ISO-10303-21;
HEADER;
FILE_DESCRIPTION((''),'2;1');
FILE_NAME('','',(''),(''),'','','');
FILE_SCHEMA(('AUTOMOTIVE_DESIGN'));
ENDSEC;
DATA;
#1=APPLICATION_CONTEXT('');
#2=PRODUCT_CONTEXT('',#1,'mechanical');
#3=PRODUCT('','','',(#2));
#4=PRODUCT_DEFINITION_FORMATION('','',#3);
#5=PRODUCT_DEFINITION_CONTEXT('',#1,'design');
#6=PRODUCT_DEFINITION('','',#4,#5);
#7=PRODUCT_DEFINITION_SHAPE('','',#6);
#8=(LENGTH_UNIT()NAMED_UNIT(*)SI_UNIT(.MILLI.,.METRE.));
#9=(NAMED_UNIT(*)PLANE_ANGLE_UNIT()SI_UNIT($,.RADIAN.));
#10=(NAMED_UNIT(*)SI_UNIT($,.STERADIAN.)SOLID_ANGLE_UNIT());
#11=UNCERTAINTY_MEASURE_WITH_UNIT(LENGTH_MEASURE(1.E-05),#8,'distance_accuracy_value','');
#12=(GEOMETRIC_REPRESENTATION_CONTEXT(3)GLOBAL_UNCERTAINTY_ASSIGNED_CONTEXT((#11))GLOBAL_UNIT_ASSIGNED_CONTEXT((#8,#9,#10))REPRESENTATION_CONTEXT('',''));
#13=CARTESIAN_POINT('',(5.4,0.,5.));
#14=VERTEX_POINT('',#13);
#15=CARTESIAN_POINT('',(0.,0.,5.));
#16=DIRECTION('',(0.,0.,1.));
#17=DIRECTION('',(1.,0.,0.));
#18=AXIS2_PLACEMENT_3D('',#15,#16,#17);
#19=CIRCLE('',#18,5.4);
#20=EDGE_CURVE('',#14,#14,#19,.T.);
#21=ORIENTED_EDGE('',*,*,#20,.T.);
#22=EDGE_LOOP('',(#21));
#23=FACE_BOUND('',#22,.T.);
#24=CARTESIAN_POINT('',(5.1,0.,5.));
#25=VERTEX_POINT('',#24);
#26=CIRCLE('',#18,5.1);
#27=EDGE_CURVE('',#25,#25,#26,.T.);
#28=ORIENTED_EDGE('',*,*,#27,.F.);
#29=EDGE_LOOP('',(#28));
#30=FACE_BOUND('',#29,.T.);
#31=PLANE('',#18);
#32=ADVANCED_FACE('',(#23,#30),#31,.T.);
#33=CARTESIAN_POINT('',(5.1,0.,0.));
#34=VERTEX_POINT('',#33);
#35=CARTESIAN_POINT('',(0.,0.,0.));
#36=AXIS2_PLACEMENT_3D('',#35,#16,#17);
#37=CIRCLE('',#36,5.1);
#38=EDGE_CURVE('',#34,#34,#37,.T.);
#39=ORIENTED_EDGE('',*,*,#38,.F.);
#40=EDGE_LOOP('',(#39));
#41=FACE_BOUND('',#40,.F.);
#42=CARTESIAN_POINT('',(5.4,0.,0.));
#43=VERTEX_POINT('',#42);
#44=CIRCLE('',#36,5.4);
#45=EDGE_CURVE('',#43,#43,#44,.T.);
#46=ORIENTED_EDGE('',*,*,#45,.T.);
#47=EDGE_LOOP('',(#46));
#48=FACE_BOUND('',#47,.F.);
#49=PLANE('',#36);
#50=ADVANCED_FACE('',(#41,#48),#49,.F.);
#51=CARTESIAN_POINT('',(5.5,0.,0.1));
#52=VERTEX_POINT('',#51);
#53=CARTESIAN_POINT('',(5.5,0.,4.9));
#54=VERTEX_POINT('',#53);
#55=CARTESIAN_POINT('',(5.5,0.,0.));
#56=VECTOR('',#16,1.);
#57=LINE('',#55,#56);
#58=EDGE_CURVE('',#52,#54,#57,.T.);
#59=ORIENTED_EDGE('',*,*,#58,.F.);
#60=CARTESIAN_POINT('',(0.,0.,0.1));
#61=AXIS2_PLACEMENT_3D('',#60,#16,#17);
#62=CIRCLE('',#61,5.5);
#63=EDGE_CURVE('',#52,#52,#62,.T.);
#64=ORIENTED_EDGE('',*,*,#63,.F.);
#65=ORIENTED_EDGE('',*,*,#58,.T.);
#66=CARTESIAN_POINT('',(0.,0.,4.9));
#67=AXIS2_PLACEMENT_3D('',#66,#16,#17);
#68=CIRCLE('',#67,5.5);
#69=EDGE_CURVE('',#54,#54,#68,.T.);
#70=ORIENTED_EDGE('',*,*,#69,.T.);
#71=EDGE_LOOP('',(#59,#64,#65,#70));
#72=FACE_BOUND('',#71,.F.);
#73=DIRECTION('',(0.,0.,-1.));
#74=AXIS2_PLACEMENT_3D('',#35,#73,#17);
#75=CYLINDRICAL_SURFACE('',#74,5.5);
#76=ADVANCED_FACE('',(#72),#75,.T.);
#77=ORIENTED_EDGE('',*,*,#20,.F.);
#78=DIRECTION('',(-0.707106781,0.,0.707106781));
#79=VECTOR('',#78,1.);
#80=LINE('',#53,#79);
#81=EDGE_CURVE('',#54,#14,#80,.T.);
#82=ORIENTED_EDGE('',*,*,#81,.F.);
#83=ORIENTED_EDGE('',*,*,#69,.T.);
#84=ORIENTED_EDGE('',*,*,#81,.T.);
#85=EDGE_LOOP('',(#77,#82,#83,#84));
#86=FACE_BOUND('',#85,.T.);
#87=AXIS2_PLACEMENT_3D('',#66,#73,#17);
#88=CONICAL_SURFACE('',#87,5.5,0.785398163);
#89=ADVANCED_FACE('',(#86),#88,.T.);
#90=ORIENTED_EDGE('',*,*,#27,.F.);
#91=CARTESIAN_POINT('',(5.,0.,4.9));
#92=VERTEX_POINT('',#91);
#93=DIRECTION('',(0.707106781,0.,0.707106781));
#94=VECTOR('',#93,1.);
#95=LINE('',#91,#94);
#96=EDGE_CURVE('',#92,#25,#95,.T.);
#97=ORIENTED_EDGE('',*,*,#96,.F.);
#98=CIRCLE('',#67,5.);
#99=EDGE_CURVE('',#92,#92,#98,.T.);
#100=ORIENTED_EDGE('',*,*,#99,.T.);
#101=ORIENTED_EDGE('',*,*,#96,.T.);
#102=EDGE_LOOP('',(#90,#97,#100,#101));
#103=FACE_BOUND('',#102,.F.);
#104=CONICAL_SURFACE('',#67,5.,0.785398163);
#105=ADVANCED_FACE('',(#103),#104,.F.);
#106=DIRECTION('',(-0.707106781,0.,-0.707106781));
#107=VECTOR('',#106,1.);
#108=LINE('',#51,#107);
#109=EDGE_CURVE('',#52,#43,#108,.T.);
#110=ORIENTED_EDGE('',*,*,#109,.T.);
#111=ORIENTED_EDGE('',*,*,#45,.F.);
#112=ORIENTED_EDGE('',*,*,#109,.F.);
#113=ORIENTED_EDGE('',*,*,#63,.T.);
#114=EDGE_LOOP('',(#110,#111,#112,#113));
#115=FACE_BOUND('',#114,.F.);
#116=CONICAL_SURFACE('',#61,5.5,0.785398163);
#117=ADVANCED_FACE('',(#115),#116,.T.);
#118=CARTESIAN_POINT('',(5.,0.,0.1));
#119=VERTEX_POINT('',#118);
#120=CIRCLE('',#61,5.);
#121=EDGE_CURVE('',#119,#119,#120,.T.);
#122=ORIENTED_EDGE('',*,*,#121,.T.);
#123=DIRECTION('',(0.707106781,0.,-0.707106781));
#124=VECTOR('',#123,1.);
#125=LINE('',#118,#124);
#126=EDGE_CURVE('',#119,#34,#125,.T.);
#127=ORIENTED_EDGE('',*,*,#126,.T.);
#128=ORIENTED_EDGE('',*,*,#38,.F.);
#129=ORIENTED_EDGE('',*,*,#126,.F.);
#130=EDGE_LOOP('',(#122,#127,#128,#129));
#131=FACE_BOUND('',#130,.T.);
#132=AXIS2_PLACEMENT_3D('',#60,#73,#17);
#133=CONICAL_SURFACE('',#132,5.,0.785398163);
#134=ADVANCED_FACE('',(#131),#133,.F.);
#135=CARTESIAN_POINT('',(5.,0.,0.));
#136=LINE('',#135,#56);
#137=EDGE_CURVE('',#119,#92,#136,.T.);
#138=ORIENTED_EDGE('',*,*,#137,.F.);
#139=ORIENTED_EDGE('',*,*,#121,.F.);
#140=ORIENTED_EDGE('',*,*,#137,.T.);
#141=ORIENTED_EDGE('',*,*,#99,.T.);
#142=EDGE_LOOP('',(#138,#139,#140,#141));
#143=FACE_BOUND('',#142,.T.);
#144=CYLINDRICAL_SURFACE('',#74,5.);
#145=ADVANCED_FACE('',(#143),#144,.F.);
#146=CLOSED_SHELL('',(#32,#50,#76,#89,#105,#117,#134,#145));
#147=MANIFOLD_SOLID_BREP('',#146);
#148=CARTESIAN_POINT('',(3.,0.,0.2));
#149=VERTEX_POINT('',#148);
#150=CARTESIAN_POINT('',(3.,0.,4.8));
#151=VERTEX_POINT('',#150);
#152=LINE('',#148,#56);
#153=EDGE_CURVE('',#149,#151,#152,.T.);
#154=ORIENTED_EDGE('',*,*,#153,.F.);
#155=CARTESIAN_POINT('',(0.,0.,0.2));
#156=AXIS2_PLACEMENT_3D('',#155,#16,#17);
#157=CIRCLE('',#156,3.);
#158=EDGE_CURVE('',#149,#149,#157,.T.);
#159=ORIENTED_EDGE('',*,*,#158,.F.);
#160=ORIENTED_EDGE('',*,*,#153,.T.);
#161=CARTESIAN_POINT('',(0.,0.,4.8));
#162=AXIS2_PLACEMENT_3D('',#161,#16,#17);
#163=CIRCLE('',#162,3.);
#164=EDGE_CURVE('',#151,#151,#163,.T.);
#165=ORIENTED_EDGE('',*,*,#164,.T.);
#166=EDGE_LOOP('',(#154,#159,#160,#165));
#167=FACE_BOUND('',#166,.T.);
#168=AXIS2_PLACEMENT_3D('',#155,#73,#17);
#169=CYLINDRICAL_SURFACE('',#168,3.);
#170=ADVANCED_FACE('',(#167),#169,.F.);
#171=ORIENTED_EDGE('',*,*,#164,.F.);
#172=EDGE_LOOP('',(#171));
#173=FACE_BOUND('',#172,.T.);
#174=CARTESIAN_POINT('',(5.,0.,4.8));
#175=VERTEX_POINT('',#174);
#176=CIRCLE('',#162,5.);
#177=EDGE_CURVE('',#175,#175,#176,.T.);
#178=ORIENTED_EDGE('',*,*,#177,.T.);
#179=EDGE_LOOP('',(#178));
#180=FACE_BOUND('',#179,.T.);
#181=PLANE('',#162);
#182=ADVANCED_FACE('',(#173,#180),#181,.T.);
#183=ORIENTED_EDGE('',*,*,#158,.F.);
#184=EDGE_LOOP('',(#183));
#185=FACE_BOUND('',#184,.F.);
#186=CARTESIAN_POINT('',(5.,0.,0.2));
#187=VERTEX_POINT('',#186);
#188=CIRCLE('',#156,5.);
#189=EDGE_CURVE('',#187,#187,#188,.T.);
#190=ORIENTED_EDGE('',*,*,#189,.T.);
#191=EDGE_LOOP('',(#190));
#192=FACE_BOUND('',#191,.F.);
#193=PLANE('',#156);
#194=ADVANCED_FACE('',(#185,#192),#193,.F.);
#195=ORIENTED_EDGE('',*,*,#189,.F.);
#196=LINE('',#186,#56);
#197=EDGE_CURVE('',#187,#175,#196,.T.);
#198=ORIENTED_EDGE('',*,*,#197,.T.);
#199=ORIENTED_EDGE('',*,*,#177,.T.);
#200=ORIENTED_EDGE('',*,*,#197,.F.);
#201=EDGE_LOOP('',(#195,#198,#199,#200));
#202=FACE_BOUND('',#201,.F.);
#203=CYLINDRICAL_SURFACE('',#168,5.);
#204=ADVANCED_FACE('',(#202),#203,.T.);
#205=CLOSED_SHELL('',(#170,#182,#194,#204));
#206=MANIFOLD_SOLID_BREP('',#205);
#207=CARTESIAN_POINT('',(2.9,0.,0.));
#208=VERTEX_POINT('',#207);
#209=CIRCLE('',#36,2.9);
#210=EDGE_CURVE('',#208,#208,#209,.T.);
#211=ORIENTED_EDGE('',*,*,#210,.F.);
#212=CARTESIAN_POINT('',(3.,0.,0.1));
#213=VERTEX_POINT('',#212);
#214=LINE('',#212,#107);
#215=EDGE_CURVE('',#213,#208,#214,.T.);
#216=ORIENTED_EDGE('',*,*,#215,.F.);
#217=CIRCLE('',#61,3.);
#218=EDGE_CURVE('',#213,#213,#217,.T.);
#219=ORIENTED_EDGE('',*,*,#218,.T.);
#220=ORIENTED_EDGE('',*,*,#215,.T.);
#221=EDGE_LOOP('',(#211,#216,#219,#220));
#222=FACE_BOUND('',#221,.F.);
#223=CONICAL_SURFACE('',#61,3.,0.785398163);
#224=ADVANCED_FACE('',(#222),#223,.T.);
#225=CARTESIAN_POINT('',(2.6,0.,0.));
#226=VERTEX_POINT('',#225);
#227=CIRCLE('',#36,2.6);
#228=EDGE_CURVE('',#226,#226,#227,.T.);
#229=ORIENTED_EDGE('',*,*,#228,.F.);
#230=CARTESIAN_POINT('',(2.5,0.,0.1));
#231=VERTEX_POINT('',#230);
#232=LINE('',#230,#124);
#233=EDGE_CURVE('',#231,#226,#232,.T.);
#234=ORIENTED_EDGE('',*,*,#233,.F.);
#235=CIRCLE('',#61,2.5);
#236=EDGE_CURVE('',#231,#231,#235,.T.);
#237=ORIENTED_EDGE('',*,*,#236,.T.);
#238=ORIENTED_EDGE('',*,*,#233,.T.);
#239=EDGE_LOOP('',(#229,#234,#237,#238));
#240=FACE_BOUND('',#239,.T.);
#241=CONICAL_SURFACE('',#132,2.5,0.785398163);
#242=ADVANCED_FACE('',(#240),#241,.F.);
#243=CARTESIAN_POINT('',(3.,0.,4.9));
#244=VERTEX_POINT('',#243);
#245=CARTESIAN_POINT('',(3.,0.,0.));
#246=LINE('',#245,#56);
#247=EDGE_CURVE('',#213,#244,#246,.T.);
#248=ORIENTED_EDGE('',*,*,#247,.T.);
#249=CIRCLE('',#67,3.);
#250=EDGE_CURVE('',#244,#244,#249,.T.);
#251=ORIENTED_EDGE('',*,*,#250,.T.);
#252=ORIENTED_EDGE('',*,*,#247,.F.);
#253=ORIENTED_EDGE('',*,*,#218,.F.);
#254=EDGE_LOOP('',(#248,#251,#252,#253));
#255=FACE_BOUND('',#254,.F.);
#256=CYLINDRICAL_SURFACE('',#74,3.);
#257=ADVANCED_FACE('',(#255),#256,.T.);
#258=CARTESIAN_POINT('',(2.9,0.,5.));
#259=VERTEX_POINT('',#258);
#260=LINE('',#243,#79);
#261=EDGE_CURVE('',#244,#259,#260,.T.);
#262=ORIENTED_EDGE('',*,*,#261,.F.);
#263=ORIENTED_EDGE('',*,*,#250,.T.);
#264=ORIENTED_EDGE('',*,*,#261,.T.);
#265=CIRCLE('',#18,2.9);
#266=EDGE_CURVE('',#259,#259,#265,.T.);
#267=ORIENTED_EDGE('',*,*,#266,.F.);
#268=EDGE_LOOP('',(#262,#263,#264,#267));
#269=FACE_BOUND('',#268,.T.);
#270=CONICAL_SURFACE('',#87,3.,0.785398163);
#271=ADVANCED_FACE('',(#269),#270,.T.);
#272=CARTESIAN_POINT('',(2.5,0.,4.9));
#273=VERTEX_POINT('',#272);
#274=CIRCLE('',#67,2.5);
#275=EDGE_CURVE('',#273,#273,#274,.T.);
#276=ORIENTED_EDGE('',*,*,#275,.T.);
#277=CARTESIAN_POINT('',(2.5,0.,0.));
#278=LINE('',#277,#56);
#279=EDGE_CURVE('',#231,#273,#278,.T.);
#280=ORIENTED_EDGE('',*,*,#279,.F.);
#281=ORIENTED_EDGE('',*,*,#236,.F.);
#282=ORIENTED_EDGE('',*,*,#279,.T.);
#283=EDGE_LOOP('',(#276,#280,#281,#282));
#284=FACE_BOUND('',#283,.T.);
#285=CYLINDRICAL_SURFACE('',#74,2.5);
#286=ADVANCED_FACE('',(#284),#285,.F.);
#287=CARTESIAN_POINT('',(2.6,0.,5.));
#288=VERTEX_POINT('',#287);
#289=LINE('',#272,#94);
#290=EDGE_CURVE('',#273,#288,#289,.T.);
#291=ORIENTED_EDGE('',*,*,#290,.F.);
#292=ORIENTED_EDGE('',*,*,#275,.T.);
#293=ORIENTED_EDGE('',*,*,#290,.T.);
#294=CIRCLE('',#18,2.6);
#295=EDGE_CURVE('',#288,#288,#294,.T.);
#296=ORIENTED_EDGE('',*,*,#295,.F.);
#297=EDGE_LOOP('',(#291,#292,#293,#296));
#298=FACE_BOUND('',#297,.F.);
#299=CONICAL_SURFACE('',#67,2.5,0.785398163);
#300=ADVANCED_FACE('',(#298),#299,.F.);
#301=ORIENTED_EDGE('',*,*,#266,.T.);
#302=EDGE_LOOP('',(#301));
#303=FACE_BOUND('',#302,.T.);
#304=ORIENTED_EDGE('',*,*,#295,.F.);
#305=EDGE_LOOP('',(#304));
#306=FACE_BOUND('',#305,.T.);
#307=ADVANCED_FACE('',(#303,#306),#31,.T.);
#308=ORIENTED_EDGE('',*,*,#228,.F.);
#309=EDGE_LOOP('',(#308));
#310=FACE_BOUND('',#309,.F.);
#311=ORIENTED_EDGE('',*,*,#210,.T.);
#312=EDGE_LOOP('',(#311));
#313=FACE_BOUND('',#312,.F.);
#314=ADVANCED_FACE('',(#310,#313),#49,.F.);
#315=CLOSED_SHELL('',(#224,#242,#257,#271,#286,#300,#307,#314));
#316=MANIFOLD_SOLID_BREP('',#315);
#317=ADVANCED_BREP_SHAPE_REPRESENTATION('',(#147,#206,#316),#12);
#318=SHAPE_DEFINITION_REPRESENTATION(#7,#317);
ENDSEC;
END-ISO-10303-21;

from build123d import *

# Parameters (mm, degrees)
F0_R      = 3
F0_R_2    = 2.5
F1_DEPTH  = 5
F0_R_3    = 5.5
F0_R_4    = 5
F2_START  = 0.2
F2_DEPTH  = 4.6
F3_SIZE   = 0.1
F3_2_SIZE = 0.1


with BuildPart() as f1:
    # F0 (on Top) → F1 (new body)
    with BuildSketch(Plane.XY):
        Circle(F0_R)
        Circle(F0_R_2, mode=Mode.SUBTRACT)
    extrude(amount=F1_DEPTH)

    # F3
    f3_edges = [f1.edges().sort_by_distance(p)[0] for p in [
        (-3, 0, 0),
        (-2.5, 0, 0),
        (-3, 0, 5),
        (-2.5, 0, 5),
    ]]
    chamfer(f3_edges, length=F3_SIZE)


with BuildPart() as f1b:
    # F0 (on Top) → F1, piece 2 (new body)
    with BuildSketch(Plane.XY):
        Circle(F0_R_3)
        Circle(F0_R_4, mode=Mode.SUBTRACT)
    extrude(amount=F1_DEPTH)

    # F3#2
    f3_2_edges = [f1b.edges().sort_by_distance(p)[0] for p in [
        (-5.5, 0, 5),
        (-5, 0, 5),
        (-5.5, 0, 0),
        (-5, 0, 0),
    ]]
    chamfer(f3_2_edges, length=F3_2_SIZE)


with BuildPart() as f2:
    # F0 (on Top) → F2 (new body)
    with BuildSketch(Plane.XY.offset(F2_START)):
        Circle(F0_R_4)
        Circle(F0_R, mode=Mode.SUBTRACT)
    extrude(amount=F2_DEPTH)


solid = Compound([f1.part, f1b.part, f2.part])
